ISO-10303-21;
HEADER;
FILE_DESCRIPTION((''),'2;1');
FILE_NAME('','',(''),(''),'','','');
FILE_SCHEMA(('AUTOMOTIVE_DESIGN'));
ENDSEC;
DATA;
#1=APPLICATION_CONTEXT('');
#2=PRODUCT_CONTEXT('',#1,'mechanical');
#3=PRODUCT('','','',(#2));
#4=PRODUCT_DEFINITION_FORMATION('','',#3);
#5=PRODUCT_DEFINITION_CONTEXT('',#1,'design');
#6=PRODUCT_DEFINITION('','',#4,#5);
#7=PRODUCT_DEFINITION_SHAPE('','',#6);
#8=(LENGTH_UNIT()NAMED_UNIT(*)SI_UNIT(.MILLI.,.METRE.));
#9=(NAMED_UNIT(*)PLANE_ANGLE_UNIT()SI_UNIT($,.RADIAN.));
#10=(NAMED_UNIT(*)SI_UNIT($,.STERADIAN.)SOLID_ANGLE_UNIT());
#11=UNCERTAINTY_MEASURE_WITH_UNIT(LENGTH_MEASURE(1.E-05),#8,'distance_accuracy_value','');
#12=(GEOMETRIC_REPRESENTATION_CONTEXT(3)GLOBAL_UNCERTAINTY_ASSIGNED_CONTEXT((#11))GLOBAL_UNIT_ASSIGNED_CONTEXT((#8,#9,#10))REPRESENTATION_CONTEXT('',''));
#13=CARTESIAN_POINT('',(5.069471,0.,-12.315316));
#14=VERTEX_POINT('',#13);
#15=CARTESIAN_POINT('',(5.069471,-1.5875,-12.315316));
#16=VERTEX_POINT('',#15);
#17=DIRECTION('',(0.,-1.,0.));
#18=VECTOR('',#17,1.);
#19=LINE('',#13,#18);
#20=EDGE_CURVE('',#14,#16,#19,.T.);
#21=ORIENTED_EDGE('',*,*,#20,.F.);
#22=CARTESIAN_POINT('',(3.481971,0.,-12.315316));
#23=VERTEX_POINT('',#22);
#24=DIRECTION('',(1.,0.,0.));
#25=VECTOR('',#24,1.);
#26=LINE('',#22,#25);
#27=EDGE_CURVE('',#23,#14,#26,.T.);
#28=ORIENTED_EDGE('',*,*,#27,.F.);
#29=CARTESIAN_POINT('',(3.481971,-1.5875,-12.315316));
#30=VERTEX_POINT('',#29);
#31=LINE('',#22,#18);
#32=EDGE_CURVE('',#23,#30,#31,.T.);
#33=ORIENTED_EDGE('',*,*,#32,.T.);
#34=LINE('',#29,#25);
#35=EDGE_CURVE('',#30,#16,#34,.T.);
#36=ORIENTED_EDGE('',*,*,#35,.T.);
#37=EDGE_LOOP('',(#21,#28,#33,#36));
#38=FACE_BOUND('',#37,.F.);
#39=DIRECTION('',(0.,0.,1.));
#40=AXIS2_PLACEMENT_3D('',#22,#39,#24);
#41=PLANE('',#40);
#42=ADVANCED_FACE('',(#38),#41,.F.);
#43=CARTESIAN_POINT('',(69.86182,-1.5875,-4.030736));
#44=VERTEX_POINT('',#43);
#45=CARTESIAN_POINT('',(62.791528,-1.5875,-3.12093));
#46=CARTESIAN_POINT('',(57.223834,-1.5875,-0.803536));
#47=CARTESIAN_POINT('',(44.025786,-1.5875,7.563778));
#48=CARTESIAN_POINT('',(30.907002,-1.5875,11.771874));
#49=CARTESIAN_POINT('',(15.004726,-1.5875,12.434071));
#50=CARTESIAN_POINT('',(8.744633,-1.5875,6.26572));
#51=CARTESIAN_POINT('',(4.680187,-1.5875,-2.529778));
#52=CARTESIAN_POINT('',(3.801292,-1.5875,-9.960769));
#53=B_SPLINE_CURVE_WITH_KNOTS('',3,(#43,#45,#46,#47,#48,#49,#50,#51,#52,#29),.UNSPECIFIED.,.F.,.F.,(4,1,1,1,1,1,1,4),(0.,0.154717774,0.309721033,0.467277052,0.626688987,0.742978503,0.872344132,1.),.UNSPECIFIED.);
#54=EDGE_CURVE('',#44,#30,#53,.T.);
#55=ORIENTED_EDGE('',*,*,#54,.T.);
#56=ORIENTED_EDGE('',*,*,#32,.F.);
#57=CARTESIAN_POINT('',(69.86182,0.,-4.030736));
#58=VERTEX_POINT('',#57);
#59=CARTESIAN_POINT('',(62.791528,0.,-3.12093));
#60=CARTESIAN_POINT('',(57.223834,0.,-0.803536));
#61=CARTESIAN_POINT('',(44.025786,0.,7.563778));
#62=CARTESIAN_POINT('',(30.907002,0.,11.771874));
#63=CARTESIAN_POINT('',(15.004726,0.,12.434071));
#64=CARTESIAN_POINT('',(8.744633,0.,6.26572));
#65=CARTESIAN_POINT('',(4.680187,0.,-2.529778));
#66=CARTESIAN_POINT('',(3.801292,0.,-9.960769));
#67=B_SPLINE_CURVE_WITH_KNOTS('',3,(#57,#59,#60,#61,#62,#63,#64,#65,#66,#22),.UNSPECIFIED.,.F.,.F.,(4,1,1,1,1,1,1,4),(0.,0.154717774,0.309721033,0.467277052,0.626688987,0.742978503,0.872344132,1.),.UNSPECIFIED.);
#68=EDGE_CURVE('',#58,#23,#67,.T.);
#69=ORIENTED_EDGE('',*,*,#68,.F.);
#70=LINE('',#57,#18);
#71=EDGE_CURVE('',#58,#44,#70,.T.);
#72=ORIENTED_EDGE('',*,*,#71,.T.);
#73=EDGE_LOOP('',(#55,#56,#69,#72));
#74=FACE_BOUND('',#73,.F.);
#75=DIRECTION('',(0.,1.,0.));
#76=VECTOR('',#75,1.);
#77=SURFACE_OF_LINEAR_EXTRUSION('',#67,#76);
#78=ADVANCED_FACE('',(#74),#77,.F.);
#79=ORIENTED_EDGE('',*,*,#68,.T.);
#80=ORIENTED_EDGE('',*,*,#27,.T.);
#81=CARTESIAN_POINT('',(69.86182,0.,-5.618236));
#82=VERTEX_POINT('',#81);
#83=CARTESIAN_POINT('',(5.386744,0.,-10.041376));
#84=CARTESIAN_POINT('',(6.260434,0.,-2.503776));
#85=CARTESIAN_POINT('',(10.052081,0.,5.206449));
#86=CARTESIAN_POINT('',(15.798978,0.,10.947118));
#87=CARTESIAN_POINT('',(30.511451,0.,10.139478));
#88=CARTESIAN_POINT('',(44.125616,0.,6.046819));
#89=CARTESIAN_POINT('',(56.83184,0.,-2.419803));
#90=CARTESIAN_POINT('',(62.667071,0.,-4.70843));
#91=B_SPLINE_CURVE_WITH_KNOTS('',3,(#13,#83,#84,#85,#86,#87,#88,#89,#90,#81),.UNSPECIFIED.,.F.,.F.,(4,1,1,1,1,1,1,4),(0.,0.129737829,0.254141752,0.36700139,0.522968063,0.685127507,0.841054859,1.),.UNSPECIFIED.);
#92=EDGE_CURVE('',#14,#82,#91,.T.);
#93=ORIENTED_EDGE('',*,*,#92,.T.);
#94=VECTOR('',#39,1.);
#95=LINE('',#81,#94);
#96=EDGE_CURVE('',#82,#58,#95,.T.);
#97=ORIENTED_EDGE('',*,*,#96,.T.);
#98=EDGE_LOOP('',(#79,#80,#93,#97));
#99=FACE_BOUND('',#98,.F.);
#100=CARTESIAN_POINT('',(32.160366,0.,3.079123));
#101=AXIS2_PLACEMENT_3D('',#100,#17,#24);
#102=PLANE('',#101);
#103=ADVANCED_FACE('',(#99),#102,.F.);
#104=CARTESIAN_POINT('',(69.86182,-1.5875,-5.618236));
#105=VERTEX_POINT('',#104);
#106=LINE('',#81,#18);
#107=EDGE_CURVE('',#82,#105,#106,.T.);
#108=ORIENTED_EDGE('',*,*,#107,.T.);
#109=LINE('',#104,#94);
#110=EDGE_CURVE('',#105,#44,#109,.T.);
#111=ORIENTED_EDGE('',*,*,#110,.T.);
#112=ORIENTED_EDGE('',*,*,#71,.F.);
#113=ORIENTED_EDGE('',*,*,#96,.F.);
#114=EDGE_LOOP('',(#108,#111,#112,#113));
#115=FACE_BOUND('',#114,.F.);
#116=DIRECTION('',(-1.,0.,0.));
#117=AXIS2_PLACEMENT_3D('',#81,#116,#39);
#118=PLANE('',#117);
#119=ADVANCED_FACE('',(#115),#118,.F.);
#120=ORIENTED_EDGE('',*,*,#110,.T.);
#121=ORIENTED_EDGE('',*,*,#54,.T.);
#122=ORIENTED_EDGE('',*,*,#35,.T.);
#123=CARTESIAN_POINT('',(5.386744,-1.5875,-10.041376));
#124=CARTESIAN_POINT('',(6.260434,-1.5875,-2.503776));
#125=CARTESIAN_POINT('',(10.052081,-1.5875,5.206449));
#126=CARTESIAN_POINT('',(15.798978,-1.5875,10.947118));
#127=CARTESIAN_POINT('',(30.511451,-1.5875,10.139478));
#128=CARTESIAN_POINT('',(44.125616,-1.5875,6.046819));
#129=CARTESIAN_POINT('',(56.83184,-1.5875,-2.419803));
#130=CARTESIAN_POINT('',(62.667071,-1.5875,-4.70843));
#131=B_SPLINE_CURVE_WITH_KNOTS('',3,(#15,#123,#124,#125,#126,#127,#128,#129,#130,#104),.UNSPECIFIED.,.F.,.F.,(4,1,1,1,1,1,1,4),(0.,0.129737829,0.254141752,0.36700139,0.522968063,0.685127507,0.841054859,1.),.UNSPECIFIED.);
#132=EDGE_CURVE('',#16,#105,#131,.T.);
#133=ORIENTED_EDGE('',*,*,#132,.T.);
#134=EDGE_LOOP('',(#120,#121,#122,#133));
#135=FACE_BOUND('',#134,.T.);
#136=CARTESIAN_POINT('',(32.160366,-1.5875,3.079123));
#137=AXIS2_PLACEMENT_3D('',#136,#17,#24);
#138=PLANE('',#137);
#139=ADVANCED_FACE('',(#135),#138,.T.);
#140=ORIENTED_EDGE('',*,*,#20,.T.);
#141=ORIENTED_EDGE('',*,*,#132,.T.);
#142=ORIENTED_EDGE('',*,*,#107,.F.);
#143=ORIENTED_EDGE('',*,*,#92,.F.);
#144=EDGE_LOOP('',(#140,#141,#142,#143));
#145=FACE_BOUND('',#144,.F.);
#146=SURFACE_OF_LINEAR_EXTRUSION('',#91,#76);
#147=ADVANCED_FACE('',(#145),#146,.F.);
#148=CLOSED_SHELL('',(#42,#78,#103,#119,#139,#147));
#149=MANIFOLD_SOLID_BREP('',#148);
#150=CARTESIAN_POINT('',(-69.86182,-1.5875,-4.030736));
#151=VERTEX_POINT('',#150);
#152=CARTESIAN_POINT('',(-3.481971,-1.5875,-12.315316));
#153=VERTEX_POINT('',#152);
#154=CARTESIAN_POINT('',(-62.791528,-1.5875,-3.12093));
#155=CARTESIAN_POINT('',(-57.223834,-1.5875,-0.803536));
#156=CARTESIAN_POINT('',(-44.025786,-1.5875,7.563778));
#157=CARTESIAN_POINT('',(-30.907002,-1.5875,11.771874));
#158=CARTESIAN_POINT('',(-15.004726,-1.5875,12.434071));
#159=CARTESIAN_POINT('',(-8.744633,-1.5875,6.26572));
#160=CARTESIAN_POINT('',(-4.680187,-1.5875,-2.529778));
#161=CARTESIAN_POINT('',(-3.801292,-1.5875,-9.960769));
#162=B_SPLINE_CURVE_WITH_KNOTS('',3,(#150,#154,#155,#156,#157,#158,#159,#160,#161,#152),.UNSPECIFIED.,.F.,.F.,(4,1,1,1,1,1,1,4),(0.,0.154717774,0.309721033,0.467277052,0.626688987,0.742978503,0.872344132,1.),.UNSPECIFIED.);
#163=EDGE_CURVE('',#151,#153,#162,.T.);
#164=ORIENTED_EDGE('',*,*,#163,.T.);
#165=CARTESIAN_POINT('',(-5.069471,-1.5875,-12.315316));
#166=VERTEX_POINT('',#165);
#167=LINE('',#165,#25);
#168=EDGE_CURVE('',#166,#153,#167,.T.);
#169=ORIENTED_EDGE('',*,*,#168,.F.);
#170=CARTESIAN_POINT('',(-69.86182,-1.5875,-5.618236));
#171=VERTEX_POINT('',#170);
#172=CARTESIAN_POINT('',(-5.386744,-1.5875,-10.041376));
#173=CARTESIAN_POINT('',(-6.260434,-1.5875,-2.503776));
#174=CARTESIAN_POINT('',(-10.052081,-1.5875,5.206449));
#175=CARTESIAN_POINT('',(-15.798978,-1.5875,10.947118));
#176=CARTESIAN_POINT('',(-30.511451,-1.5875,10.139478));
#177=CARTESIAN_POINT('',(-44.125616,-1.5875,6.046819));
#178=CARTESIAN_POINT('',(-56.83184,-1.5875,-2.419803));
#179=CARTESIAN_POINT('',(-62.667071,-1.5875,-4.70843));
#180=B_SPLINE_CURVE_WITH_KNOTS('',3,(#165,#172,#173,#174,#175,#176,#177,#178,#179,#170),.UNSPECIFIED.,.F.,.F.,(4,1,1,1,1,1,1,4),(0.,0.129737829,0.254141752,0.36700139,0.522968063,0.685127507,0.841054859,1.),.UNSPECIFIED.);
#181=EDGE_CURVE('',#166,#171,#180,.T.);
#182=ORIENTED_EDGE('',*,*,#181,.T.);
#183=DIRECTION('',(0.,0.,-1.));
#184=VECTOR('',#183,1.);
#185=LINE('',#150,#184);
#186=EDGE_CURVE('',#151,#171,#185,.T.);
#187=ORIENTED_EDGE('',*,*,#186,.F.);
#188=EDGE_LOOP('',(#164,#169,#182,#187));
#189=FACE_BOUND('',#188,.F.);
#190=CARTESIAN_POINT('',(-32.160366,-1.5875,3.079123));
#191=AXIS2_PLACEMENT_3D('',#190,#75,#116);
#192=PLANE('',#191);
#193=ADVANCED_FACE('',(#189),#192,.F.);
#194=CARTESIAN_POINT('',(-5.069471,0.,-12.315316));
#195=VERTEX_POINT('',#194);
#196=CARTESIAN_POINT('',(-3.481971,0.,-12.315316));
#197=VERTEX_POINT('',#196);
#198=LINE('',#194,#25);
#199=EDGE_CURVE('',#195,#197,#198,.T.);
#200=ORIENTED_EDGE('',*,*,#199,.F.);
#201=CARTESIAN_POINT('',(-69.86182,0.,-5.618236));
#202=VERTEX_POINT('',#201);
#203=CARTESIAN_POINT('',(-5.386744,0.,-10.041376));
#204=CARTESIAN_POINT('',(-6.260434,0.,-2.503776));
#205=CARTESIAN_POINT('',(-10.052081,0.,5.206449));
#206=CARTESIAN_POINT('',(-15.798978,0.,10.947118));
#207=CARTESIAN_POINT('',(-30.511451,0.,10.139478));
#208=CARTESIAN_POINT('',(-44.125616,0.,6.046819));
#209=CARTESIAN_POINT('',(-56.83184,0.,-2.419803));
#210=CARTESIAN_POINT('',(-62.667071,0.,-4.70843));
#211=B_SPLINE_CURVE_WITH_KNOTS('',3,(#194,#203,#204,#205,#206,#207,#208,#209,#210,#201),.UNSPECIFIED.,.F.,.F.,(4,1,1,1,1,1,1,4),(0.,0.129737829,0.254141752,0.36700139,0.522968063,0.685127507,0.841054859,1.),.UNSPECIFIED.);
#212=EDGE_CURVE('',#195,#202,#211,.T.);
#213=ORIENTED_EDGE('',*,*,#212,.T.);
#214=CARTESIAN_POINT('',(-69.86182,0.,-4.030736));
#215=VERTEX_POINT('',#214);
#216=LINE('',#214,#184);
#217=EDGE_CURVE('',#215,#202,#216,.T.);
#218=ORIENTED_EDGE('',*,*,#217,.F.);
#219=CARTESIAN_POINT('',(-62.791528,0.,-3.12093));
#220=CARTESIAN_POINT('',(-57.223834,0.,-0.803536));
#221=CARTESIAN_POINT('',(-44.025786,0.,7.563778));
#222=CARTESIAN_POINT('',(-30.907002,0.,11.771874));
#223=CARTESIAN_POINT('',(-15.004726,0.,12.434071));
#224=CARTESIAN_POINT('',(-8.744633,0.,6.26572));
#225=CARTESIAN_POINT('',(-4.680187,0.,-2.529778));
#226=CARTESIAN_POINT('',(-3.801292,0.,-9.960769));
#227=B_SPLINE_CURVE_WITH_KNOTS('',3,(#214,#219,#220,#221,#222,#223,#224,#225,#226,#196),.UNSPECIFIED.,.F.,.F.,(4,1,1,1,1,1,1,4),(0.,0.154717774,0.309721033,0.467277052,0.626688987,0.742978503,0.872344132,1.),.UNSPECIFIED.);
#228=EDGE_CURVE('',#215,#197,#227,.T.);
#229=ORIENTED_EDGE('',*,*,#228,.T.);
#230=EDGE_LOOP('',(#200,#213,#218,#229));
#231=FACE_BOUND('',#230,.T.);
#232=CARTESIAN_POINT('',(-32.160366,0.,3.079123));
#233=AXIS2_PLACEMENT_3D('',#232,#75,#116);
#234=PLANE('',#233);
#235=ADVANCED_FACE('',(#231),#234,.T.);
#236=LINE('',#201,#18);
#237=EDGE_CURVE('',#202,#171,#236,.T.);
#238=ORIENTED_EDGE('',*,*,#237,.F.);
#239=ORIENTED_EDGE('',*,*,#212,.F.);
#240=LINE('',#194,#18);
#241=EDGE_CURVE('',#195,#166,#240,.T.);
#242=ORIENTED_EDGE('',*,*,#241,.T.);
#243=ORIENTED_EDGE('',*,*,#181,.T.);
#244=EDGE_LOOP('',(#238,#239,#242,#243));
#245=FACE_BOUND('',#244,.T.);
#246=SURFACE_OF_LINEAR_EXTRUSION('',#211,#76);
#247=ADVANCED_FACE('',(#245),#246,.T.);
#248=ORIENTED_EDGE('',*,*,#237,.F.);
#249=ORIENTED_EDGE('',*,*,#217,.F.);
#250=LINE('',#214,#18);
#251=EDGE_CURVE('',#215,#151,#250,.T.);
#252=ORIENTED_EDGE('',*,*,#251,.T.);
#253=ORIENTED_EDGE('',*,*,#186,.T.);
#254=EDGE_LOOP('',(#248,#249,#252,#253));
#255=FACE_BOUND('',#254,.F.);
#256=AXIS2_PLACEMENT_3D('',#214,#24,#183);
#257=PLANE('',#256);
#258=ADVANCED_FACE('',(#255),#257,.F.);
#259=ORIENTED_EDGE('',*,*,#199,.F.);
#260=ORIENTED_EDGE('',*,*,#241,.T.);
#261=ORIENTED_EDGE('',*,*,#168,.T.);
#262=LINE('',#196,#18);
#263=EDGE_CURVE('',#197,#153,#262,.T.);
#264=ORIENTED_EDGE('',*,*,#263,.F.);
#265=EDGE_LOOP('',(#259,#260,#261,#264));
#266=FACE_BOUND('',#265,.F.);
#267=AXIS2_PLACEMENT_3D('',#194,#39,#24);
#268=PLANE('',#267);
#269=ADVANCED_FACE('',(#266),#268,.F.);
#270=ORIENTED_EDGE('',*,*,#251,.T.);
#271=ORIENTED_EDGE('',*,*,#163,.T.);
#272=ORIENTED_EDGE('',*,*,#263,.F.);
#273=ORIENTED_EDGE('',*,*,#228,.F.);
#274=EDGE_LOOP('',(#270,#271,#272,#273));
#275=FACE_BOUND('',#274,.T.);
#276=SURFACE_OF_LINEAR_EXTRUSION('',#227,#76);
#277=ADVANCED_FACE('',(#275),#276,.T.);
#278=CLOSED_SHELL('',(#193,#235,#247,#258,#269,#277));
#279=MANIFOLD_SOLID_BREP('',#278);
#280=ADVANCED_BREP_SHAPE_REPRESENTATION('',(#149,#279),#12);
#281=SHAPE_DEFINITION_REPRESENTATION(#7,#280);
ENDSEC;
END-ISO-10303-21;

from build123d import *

# Parameters (mm, degrees)
F1_DEPTH = 1.5875


# Not quite as in the source:
# - a length typed as a fraction of an inch, garbled in the dataset ("3 / 203.2 mm" for 3/8 in), is restored


with BuildPart() as f1:
    # F0 (on Front) → F1 (new body)
    with BuildSketch(Plane.XZ):
        with BuildLine():
            add(Edge.make_bspline(
                [(-69.8618200234, -4.0307355407), (-62.7915279521, -3.1209299924), (-57.2238344828, -0.8035358429), (-44.0257855414, 7.5637777447), (-30.9070015059, 11.7718739084), (-15.0047259193, 12.4340705831), (-8.7446333351, 6.2657200791), (-4.6801867065, -2.5297780334), (-3.8012916914, -9.9607688029), (-3.4819712574, -12.3153160934)],
                knots=[0, 0, 0, 0, 0.1547177739, 0.3097210327, 0.4672770518, 0.6266889873, 0.7429785033, 0.8723441321, 1, 1, 1, 1], degree=3))
            Line((-69.8618200234, -4.0307355407), (-69.8618200234, -5.6182355407))
            add(Edge.make_bspline(
                [(-5.0694712574, -12.3153160934), (-5.3867439208, -10.0413757398), (-6.2604337301, -2.5037762179), (-10.0520808031, 5.206448905), (-15.7989784307, 10.9471177854), (-30.5114508321, 10.1394782106), (-44.1256162236, 6.0468191153), (-56.8318396104, -2.4198026522), (-62.6670705525, -4.7084299924), (-69.8618200234, -5.6182355407)],
                knots=[0, 0, 0, 0, 0.1297378292, 0.2541417516, 0.3670013899, 0.5229680625, 0.6851275071, 0.8410548588, 1, 1, 1, 1], degree=3))
            Line((-5.0694712574, -12.3153160934), (-3.4819712574, -12.3153160934))
        make_face()
    extrude(amount=F1_DEPTH)


with BuildPart() as f1b:
    # F0 (on Front) → F1, piece 2 (new body)
    with BuildSketch(Plane.XZ):
        with BuildLine():
            Line((69.8618200234, -5.6182355407), (69.8618200234, -4.0307355407))
            add(Edge.make_bspline(
                [(69.8618200234, -4.0307355407), (62.7915279521, -3.1209299924), (57.2238344828, -0.8035358429), (44.0257855414, 7.5637777447), (30.9070015059, 11.7718739084), (15.0047259193, 12.4340705831), (8.7446333351, 6.2657200791), (4.6801867065, -2.5297780334), (3.8012916914, -9.9607688029), (3.4819712574, -12.3153160934)],
                knots=[0, 0, 0, 0, 0.1547177739, 0.3097210327, 0.4672770518, 0.6266889873, 0.7429785033, 0.8723441321, 1, 1, 1, 1], degree=3))
            Line((3.4819712574, -12.3153160934), (5.0694712574, -12.3153160934))
            add(Edge.make_bspline(
                [(5.0694712574, -12.3153160934), (5.3867439208, -10.0413757398), (6.2604337301, -2.5037762179), (10.0520808031, 5.206448905), (15.7989784307, 10.9471177854), (30.5114508321, 10.1394782106), (44.1256162236, 6.0468191153), (56.8318396104, -2.4198026522), (62.6670705525, -4.7084299924), (69.8618200234, -5.6182355407)],
                knots=[0, 0, 0, 0, 0.1297378292, 0.2541417516, 0.3670013899, 0.5229680625, 0.6851275071, 0.8410548588, 1, 1, 1, 1], degree=3))
        make_face()
    extrude(amount=F1_DEPTH)


solid = Compound([f1.part, f1b.part])
